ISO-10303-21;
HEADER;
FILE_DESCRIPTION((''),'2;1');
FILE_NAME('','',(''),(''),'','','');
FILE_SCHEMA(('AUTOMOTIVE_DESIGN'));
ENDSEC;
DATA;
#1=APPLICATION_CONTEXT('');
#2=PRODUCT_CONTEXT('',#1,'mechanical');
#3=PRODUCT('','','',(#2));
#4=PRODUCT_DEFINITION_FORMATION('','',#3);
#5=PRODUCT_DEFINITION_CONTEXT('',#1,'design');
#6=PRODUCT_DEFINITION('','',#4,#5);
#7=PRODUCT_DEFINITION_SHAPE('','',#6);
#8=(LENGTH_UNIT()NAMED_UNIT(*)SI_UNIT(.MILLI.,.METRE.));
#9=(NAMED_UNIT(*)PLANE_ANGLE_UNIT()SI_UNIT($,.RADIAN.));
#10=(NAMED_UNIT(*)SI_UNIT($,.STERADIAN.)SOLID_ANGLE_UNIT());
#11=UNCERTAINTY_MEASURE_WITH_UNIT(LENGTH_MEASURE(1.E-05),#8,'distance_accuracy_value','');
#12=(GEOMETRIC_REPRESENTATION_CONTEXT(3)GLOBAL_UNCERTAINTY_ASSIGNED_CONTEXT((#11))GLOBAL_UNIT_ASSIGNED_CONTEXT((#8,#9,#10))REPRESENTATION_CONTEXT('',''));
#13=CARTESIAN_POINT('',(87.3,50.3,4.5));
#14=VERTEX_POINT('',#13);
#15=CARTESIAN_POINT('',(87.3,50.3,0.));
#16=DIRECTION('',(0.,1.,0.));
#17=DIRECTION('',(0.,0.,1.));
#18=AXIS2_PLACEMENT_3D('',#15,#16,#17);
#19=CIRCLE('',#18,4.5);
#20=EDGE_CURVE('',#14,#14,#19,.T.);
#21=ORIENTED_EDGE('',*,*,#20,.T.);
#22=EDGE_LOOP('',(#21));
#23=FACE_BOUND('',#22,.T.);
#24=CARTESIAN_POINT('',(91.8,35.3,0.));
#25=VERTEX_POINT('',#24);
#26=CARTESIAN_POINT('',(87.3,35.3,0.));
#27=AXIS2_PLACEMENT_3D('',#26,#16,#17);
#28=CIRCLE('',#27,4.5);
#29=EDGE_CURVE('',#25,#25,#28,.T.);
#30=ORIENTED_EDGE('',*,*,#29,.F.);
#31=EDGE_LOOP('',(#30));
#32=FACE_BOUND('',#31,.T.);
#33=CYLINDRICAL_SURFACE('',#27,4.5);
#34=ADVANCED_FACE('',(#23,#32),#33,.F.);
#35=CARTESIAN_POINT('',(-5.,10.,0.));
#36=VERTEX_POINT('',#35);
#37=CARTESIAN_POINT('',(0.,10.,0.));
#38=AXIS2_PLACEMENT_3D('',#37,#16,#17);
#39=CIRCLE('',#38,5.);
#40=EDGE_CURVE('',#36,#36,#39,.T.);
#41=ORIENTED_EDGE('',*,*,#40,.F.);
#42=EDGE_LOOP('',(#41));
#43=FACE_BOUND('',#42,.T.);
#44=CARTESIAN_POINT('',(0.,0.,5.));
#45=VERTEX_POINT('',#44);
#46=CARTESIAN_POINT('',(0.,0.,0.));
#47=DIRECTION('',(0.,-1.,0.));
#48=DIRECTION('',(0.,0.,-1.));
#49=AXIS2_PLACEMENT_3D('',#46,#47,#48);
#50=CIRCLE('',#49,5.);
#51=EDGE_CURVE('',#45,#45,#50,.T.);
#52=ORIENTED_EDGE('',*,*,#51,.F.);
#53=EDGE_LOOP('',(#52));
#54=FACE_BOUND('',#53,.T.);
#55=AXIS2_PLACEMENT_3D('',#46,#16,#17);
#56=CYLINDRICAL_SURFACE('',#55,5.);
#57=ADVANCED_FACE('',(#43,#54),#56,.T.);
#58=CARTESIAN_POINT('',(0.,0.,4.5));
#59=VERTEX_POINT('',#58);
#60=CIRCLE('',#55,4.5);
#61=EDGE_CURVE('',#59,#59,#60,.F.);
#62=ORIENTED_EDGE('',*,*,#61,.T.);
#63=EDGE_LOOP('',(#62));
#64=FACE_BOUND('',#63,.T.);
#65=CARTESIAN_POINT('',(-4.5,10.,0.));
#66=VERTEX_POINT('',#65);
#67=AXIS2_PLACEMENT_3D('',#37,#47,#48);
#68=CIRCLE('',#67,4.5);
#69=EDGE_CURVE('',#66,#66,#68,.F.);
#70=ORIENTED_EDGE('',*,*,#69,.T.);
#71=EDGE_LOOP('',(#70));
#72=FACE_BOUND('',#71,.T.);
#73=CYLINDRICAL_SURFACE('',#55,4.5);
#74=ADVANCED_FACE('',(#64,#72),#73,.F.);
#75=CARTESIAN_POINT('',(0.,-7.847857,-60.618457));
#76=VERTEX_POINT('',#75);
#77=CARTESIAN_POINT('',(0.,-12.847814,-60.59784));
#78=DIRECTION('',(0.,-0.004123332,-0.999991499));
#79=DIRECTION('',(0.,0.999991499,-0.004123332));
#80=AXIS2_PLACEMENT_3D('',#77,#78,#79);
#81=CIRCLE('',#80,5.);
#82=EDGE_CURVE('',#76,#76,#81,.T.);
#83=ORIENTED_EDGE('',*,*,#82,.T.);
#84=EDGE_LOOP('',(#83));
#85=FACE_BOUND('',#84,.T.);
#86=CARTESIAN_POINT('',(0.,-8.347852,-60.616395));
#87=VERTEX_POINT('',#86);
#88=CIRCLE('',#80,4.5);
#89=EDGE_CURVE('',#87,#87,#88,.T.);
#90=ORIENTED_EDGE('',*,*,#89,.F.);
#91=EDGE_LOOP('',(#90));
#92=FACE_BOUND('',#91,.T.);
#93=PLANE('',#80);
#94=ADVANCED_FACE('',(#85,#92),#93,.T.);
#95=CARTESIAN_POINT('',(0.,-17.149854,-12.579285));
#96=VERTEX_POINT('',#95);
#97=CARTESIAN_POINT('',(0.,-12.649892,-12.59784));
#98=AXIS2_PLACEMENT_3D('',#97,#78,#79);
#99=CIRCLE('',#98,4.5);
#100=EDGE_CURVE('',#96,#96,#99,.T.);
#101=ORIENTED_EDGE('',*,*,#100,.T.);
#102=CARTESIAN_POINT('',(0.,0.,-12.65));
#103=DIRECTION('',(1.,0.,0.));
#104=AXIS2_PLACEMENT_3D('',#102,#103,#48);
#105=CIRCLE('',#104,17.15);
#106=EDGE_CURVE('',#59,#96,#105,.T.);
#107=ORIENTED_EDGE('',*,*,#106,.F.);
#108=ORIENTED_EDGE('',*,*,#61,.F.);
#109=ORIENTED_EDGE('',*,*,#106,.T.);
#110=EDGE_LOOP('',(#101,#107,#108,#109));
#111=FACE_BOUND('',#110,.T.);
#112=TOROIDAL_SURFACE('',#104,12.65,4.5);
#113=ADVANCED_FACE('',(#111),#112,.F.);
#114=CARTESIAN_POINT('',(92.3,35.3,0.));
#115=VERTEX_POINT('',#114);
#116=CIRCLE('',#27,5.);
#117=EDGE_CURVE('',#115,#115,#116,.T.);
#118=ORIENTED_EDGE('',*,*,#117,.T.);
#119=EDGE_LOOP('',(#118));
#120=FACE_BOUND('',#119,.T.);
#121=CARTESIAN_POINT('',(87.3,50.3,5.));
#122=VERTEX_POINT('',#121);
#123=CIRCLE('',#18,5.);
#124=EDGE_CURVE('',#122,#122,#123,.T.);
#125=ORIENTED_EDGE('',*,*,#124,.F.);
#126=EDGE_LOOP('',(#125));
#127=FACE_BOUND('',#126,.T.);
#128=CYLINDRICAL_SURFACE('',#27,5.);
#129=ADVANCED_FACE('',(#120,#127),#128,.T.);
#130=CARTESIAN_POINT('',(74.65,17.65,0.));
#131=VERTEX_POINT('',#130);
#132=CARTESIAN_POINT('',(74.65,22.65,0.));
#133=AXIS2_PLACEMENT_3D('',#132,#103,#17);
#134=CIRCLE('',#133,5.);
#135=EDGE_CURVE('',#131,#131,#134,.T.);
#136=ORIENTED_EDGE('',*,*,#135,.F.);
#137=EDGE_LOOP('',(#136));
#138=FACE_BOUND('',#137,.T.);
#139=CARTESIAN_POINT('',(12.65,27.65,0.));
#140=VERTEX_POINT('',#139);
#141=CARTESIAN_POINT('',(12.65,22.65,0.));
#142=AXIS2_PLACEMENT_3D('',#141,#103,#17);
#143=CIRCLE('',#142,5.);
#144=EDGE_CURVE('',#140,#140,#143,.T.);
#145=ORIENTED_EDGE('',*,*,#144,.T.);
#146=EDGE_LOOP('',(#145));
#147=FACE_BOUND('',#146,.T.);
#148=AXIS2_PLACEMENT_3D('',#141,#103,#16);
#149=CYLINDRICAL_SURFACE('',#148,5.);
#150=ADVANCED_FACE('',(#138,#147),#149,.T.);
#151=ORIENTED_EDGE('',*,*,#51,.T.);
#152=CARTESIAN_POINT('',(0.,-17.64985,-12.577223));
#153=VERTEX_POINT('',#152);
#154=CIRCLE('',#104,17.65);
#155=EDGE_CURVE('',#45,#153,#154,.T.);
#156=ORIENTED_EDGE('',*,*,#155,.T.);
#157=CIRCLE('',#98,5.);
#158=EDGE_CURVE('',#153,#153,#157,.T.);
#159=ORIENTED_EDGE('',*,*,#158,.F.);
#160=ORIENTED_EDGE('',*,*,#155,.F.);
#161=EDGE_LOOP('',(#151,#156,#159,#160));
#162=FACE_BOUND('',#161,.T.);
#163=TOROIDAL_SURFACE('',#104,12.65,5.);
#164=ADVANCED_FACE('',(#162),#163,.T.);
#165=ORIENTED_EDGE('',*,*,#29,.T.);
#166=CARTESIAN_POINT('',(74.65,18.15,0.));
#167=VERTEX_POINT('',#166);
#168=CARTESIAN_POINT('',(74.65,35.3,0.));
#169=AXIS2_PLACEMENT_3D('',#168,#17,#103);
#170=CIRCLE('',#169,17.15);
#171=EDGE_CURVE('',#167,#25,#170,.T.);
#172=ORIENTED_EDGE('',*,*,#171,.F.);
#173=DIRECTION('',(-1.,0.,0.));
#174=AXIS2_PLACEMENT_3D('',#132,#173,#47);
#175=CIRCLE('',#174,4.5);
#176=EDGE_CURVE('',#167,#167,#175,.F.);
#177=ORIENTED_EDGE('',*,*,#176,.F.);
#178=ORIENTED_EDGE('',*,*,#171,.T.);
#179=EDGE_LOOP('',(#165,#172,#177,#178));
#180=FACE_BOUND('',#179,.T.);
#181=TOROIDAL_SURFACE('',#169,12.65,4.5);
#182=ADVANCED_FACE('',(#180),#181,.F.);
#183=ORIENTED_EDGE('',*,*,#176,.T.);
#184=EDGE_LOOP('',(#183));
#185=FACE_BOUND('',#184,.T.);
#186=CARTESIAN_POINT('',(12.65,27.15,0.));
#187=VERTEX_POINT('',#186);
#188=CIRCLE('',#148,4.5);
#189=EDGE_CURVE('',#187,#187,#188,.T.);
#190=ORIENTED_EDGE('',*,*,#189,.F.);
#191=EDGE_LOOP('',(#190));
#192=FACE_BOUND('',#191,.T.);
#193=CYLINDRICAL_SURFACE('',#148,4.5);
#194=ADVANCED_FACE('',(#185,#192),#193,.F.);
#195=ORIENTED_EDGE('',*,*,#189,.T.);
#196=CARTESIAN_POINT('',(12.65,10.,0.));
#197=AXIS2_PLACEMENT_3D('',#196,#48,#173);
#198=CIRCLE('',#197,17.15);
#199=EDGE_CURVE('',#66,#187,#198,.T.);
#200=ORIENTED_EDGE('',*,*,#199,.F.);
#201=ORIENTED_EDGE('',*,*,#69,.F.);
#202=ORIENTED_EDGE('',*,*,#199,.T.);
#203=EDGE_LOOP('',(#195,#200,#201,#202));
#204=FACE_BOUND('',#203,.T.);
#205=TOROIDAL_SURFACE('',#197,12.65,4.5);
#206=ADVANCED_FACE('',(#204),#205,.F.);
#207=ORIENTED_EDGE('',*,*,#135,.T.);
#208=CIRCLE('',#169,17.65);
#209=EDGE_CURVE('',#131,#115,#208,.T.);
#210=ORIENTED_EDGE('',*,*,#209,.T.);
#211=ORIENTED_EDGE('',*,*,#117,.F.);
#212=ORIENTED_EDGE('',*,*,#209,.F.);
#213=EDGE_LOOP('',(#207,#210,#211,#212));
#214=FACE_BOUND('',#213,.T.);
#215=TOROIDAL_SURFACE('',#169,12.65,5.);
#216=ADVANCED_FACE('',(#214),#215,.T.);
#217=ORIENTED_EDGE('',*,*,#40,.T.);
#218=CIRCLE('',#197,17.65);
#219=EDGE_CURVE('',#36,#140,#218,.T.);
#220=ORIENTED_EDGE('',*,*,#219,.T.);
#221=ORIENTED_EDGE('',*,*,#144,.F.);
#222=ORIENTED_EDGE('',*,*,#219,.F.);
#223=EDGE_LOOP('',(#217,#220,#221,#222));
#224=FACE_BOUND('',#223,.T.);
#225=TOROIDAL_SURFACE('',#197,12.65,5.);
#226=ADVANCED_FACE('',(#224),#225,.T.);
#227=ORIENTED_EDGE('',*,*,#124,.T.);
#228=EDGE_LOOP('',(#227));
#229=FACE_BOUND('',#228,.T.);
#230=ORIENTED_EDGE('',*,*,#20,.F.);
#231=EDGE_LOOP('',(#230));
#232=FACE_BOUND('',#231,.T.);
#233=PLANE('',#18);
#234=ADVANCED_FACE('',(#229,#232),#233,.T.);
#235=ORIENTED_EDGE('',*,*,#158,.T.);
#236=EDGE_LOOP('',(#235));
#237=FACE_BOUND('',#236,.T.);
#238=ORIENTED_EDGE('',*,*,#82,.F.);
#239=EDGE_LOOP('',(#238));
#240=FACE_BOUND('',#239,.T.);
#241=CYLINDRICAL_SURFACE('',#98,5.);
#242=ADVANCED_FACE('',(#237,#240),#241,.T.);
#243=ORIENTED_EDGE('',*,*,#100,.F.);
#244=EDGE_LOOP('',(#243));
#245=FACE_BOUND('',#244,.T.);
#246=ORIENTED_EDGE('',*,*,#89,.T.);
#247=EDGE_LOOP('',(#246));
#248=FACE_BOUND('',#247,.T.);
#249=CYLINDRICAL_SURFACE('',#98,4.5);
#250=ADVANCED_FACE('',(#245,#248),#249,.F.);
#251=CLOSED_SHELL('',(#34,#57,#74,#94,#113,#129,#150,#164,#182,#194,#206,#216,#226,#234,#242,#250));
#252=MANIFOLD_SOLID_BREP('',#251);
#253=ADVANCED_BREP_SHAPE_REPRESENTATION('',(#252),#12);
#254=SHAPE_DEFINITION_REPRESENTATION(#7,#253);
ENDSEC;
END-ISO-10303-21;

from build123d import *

# Parameters (mm, degrees)
SKETCH1_R          = 5
SWEEP2_START       = -60.650300513
SWEEP2_OUTLINE_R   = 5
SWEEP2_DEPTH       = 48.00040805
SWEEP2_2_OUTLINE_R = 5
SWEEP2_2_ANGLE     = 89.76375
SHELL1_T           = -0.5


with BuildPart() as part:
    # Sweep1: sweep along a path in Sketch2
    with BuildLine(Plane.XY) as sweep1_path:
        Line((0, 0), (0, 10))
        ThreePointArc((0, 10), (3.705099218, 18.944900782), (12.65, 22.65))
        Line((12.65, 22.65), (74.65, 22.65))
        ThreePointArc((74.65, 22.65), (83.594900782, 26.355099218), (87.3, 35.3))
        Line((87.3, 35.3), (87.3, 50.3))
    # Sketch1 → Sweep1 (sweep)
    with BuildSketch(Plane(origin=(0, 0, 0), x_dir=(1, 0, 0), z_dir=(0, 1, 0))):
        Circle(SKETCH1_R)
    sweep(path=sweep1_path.line)



with BuildPart() as body_2:
    # Sweep2: read off the stored shape, not the designer's step
    # Sweep2 outline → Sweep2 (new body)
    with BuildSketch(Plane(origin=(0, 0, 0), x_dir=(1, 0, 0), z_dir=(0, 0.00412333182871543, 0.999991499031182)).offset(SWEEP2_START)):
        with Locations((0, -12.597839852)):
            Circle(SWEEP2_OUTLINE_R)
    extrude(amount=SWEEP2_DEPTH)


with BuildPart() as part_1:
    add(part.part)

    add(body_2.part)  # Sweep2 2 merges body 2
    # Sweep2 2 outline → Sweep2 2 (revolve)
    with BuildSketch(Plane(origin=(0, 0, -12.65), x_dir=(0, 0, 1), z_dir=(0, 1, 0))):
        with Locations((12.65, 0)):
            Circle(SWEEP2_2_OUTLINE_R)
    revolve(axis=Axis((0, 0, -12.65), (1, 0, 0)), revolution_arc=SWEEP2_2_ANGLE)

    # Shell1
    shell1_openings = [part_1.faces().sort_by_distance(p)[0] for p in [
        (0, -12.847814073, -60.597839853),
        (87.3, 50.3, 0),
    ]]
    offset(amount=SHELL1_T, openings=shell1_openings, kind=Kind.INTERSECTION)


solid = part_1.part
